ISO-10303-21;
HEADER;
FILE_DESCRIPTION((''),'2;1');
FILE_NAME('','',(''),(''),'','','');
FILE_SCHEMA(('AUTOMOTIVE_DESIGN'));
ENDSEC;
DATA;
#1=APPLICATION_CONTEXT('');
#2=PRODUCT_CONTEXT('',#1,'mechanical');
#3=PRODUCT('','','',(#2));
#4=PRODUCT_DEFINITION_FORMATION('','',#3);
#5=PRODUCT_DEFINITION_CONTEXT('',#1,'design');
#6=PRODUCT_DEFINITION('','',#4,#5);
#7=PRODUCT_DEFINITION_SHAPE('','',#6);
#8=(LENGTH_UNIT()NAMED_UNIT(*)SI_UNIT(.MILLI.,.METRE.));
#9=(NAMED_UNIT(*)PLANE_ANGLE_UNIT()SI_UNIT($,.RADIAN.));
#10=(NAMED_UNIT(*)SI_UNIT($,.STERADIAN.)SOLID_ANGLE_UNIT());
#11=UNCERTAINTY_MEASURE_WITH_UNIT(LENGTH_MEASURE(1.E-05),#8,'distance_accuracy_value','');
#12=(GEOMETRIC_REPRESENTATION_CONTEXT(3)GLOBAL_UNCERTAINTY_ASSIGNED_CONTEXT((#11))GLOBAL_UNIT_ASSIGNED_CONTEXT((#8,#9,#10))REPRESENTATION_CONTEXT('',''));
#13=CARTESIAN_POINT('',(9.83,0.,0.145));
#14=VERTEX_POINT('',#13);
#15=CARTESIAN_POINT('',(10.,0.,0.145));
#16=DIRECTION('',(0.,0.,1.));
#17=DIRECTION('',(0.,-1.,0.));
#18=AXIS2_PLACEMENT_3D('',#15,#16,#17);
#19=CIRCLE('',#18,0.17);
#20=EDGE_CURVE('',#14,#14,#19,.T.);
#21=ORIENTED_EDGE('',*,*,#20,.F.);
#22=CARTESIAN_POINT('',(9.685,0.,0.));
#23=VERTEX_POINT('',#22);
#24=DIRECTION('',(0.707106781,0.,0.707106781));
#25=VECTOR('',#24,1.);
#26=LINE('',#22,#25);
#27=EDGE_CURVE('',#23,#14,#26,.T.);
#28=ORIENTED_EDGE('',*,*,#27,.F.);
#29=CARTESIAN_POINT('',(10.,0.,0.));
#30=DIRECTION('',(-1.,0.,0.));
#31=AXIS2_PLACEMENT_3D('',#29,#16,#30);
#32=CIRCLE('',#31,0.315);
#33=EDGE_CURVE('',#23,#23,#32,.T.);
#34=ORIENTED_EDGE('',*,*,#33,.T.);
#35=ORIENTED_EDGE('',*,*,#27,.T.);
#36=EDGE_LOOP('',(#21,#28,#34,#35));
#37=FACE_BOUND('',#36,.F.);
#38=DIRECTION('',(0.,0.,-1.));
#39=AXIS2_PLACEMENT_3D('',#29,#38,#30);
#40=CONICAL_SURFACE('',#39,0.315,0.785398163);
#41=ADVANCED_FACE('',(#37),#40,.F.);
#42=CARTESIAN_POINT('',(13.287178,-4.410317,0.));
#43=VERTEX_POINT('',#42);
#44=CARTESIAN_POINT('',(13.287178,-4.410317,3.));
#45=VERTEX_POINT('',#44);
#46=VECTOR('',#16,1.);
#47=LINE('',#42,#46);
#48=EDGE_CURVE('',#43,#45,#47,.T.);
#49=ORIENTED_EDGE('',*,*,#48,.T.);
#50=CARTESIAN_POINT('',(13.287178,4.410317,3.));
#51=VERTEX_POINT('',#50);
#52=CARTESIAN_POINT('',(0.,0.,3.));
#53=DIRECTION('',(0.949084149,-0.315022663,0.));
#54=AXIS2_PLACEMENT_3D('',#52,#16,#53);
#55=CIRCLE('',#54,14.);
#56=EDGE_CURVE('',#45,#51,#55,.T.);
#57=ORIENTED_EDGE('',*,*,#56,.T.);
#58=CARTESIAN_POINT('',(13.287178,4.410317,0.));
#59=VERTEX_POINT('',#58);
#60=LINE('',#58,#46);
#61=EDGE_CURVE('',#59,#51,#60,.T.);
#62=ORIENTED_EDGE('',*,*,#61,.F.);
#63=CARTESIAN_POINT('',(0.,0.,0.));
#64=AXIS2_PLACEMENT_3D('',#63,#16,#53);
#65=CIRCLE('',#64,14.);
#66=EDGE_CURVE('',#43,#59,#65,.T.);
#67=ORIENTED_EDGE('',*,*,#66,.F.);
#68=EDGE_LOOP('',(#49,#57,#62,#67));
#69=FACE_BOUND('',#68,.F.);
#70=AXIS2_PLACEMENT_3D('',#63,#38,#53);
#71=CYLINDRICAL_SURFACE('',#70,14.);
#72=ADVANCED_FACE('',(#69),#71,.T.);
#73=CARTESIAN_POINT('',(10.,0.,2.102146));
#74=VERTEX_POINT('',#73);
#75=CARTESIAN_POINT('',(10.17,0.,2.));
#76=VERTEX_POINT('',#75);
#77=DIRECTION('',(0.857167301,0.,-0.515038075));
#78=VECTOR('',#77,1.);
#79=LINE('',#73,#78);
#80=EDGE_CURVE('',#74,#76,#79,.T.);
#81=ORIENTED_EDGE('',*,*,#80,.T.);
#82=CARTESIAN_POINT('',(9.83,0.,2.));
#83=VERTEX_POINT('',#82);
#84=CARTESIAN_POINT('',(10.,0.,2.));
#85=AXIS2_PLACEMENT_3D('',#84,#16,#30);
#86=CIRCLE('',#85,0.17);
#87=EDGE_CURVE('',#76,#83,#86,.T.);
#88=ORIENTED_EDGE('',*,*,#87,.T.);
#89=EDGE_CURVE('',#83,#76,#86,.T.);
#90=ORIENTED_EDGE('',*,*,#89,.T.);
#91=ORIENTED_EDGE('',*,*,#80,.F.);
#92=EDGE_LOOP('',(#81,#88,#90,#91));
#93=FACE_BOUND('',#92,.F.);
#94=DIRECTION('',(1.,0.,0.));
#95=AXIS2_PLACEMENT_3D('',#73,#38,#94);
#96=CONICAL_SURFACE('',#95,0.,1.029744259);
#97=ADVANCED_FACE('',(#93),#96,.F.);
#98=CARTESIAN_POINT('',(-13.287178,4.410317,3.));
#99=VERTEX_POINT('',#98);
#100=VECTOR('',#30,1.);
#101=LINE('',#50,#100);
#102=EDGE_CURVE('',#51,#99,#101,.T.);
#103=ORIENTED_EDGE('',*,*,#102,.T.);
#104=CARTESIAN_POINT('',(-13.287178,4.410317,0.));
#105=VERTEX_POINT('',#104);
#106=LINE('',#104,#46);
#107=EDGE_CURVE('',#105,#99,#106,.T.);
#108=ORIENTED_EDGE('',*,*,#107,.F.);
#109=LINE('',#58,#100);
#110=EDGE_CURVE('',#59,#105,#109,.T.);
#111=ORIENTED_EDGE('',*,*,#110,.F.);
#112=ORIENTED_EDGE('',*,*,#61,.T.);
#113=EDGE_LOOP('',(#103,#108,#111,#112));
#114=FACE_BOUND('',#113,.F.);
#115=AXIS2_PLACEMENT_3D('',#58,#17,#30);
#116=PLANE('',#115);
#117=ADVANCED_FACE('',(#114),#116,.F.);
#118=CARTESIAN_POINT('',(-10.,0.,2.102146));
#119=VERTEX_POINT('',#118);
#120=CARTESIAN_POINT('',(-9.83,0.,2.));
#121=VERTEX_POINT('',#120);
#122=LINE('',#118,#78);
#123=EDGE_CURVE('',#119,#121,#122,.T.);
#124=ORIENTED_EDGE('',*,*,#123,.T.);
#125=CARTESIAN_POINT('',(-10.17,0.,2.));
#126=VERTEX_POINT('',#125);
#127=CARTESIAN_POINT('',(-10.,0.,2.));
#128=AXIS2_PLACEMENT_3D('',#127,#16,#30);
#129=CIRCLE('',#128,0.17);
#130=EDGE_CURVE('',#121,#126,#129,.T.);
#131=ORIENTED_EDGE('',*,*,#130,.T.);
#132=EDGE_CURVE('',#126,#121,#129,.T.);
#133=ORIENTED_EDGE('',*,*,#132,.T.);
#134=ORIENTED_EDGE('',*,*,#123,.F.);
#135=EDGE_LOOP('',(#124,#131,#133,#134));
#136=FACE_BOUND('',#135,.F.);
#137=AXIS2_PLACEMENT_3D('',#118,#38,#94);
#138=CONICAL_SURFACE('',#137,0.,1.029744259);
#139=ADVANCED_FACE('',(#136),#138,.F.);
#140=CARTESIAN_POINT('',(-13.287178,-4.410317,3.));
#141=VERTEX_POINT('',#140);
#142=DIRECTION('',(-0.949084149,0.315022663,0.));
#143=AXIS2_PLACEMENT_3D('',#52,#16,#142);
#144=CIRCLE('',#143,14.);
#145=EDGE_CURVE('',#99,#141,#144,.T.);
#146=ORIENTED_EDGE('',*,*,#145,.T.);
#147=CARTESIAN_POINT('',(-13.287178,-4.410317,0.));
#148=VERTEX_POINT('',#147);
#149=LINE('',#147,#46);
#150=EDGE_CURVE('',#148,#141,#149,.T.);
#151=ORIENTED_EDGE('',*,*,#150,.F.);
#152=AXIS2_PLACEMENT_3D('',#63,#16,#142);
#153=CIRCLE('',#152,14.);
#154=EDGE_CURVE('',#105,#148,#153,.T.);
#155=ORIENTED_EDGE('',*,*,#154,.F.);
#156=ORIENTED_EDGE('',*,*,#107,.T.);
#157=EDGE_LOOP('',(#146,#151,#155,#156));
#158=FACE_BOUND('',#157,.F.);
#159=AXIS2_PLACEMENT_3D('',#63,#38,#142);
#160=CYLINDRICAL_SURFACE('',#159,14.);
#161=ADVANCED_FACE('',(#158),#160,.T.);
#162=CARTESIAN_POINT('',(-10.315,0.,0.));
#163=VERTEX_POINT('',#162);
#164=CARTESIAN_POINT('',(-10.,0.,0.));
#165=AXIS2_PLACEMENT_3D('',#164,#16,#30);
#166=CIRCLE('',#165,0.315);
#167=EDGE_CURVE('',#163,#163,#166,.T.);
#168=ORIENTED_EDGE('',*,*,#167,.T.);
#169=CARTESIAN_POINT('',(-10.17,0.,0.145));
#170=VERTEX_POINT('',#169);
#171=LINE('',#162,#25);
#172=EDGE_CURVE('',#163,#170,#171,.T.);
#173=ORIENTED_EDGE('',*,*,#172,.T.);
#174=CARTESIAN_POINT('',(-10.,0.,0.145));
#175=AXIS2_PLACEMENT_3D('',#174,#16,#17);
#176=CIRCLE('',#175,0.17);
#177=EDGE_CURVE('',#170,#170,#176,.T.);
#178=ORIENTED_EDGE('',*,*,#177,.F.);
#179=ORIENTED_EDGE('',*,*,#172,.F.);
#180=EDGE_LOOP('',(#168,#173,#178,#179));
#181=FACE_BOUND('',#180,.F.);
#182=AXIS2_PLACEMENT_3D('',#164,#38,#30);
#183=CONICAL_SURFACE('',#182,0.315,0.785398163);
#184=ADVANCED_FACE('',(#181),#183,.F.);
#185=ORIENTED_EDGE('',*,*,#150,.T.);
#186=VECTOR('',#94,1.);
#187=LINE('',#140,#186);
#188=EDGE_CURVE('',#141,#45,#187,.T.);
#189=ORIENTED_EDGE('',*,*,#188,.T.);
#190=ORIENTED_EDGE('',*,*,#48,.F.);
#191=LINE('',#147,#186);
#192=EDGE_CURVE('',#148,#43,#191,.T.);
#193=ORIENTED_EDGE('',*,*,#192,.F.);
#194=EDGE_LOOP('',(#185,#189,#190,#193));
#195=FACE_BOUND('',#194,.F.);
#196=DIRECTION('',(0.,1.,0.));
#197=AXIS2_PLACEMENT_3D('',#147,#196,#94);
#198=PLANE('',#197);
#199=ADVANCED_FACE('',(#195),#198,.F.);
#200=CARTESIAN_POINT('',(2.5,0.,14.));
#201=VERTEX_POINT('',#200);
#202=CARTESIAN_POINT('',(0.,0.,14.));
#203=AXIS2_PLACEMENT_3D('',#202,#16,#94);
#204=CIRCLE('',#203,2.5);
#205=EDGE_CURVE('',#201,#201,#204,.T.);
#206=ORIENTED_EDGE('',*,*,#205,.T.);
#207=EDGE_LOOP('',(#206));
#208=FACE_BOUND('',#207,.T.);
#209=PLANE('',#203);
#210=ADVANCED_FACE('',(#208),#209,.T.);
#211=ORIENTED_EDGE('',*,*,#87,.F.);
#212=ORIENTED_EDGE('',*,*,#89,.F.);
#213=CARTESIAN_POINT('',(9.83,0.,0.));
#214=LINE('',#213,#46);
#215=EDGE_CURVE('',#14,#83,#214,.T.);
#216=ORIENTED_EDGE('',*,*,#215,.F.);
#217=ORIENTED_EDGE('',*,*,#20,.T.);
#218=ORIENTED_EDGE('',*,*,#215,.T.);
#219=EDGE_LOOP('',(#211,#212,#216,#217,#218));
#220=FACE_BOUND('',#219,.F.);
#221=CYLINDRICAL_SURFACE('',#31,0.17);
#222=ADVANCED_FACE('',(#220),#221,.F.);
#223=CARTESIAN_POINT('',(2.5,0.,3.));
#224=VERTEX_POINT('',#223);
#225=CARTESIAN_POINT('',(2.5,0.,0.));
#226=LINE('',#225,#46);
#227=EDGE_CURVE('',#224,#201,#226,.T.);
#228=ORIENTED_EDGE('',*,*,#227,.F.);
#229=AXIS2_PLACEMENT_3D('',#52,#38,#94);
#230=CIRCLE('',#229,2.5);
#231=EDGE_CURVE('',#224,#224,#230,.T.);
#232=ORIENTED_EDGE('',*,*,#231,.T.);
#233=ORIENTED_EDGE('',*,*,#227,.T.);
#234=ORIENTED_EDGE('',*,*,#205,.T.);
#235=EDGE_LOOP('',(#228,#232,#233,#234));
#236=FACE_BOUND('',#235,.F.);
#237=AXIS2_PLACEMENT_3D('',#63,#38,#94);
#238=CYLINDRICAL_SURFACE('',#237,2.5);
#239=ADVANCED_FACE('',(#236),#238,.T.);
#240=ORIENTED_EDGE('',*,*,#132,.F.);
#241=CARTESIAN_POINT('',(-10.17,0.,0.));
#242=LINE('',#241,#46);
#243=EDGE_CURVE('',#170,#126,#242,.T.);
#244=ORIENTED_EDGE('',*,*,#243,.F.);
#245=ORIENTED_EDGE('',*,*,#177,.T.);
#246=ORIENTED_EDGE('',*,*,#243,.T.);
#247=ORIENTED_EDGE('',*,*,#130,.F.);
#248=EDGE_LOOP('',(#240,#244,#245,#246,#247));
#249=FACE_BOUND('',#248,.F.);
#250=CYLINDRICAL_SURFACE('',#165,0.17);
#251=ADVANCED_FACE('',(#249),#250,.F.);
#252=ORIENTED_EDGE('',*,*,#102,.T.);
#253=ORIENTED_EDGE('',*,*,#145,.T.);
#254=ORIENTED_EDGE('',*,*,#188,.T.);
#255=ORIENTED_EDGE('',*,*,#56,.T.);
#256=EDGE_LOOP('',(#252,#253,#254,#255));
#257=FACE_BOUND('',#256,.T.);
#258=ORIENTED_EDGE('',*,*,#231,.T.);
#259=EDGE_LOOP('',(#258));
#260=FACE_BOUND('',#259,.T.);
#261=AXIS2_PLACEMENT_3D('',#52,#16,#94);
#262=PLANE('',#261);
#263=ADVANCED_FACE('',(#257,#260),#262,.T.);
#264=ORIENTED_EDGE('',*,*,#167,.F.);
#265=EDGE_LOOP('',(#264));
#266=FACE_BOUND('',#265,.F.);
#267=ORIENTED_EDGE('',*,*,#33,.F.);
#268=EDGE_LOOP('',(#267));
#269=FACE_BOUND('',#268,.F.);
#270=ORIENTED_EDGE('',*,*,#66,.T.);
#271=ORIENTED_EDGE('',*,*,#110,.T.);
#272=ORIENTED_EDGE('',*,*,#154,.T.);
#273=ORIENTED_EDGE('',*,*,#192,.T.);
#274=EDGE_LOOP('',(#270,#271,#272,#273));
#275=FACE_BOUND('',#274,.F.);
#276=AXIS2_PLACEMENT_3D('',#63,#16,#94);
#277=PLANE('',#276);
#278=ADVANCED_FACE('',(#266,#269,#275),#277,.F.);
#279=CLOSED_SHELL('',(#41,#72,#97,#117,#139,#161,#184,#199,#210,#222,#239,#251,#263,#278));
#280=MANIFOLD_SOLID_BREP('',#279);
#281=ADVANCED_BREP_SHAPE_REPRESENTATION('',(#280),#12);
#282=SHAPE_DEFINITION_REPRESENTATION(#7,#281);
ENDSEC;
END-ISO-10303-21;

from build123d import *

# Parameters (mm, degrees)
F1_DEPTH       = 3
F2_D           = 0.34
F2_DEPTH       = 2
F2_CSINK_D     = 0.63
F2_CSINK_ANGLE = 90
F2_TIP         = 0.1021463052
F5_R           = 2.5
F6_DEPTH       = 14


# Not quite as in the source:
# - the program builds the solid bodies; features that only make, move or delete a surface that nothing else refers to are left out


with BuildPart() as f1:
    # F0 (on Top) → F1 (new body)
    with BuildSketch(Plane.XY):
        with BuildLine():
            Line((13.2871780876, 4.4103172753), (-13.2871780876, 4.4103172753))
            ThreePointArc((-13.2871780876, 4.4103172753), (-14, 0), (-13.2871780876, -4.4103172753))
            Line((-13.2871780876, -4.4103172753), (13.2871780876, -4.4103172753))
            ThreePointArc((13.2871780876, -4.4103172753), (14, 0), (13.2871780876, 4.4103172753))
        make_face()
    extrude(amount=F1_DEPTH)

    # F2
    with Locations(Plane(origin=(0, 0, 0), x_dir=(1, 0, 0), z_dir=(0, 0, -1))):
        with Locations((-10, 0), (10, 0)):
            CounterSinkHole(F2_D / 2, F2_CSINK_D / 2, depth=F2_DEPTH, counter_sink_angle=F2_CSINK_ANGLE)
            with Locations((0, 0, -(F2_DEPTH + F2_TIP / 2))):  # 118° drill point
                Cone(0, F2_D / 2, F2_TIP, mode=Mode.SUBTRACT)

    # F5 (on Top) → F6 (join)
    with BuildSketch(Plane.XY):
        Circle(F5_R)
    extrude(amount=F6_DEPTH)


solid = f1.part
